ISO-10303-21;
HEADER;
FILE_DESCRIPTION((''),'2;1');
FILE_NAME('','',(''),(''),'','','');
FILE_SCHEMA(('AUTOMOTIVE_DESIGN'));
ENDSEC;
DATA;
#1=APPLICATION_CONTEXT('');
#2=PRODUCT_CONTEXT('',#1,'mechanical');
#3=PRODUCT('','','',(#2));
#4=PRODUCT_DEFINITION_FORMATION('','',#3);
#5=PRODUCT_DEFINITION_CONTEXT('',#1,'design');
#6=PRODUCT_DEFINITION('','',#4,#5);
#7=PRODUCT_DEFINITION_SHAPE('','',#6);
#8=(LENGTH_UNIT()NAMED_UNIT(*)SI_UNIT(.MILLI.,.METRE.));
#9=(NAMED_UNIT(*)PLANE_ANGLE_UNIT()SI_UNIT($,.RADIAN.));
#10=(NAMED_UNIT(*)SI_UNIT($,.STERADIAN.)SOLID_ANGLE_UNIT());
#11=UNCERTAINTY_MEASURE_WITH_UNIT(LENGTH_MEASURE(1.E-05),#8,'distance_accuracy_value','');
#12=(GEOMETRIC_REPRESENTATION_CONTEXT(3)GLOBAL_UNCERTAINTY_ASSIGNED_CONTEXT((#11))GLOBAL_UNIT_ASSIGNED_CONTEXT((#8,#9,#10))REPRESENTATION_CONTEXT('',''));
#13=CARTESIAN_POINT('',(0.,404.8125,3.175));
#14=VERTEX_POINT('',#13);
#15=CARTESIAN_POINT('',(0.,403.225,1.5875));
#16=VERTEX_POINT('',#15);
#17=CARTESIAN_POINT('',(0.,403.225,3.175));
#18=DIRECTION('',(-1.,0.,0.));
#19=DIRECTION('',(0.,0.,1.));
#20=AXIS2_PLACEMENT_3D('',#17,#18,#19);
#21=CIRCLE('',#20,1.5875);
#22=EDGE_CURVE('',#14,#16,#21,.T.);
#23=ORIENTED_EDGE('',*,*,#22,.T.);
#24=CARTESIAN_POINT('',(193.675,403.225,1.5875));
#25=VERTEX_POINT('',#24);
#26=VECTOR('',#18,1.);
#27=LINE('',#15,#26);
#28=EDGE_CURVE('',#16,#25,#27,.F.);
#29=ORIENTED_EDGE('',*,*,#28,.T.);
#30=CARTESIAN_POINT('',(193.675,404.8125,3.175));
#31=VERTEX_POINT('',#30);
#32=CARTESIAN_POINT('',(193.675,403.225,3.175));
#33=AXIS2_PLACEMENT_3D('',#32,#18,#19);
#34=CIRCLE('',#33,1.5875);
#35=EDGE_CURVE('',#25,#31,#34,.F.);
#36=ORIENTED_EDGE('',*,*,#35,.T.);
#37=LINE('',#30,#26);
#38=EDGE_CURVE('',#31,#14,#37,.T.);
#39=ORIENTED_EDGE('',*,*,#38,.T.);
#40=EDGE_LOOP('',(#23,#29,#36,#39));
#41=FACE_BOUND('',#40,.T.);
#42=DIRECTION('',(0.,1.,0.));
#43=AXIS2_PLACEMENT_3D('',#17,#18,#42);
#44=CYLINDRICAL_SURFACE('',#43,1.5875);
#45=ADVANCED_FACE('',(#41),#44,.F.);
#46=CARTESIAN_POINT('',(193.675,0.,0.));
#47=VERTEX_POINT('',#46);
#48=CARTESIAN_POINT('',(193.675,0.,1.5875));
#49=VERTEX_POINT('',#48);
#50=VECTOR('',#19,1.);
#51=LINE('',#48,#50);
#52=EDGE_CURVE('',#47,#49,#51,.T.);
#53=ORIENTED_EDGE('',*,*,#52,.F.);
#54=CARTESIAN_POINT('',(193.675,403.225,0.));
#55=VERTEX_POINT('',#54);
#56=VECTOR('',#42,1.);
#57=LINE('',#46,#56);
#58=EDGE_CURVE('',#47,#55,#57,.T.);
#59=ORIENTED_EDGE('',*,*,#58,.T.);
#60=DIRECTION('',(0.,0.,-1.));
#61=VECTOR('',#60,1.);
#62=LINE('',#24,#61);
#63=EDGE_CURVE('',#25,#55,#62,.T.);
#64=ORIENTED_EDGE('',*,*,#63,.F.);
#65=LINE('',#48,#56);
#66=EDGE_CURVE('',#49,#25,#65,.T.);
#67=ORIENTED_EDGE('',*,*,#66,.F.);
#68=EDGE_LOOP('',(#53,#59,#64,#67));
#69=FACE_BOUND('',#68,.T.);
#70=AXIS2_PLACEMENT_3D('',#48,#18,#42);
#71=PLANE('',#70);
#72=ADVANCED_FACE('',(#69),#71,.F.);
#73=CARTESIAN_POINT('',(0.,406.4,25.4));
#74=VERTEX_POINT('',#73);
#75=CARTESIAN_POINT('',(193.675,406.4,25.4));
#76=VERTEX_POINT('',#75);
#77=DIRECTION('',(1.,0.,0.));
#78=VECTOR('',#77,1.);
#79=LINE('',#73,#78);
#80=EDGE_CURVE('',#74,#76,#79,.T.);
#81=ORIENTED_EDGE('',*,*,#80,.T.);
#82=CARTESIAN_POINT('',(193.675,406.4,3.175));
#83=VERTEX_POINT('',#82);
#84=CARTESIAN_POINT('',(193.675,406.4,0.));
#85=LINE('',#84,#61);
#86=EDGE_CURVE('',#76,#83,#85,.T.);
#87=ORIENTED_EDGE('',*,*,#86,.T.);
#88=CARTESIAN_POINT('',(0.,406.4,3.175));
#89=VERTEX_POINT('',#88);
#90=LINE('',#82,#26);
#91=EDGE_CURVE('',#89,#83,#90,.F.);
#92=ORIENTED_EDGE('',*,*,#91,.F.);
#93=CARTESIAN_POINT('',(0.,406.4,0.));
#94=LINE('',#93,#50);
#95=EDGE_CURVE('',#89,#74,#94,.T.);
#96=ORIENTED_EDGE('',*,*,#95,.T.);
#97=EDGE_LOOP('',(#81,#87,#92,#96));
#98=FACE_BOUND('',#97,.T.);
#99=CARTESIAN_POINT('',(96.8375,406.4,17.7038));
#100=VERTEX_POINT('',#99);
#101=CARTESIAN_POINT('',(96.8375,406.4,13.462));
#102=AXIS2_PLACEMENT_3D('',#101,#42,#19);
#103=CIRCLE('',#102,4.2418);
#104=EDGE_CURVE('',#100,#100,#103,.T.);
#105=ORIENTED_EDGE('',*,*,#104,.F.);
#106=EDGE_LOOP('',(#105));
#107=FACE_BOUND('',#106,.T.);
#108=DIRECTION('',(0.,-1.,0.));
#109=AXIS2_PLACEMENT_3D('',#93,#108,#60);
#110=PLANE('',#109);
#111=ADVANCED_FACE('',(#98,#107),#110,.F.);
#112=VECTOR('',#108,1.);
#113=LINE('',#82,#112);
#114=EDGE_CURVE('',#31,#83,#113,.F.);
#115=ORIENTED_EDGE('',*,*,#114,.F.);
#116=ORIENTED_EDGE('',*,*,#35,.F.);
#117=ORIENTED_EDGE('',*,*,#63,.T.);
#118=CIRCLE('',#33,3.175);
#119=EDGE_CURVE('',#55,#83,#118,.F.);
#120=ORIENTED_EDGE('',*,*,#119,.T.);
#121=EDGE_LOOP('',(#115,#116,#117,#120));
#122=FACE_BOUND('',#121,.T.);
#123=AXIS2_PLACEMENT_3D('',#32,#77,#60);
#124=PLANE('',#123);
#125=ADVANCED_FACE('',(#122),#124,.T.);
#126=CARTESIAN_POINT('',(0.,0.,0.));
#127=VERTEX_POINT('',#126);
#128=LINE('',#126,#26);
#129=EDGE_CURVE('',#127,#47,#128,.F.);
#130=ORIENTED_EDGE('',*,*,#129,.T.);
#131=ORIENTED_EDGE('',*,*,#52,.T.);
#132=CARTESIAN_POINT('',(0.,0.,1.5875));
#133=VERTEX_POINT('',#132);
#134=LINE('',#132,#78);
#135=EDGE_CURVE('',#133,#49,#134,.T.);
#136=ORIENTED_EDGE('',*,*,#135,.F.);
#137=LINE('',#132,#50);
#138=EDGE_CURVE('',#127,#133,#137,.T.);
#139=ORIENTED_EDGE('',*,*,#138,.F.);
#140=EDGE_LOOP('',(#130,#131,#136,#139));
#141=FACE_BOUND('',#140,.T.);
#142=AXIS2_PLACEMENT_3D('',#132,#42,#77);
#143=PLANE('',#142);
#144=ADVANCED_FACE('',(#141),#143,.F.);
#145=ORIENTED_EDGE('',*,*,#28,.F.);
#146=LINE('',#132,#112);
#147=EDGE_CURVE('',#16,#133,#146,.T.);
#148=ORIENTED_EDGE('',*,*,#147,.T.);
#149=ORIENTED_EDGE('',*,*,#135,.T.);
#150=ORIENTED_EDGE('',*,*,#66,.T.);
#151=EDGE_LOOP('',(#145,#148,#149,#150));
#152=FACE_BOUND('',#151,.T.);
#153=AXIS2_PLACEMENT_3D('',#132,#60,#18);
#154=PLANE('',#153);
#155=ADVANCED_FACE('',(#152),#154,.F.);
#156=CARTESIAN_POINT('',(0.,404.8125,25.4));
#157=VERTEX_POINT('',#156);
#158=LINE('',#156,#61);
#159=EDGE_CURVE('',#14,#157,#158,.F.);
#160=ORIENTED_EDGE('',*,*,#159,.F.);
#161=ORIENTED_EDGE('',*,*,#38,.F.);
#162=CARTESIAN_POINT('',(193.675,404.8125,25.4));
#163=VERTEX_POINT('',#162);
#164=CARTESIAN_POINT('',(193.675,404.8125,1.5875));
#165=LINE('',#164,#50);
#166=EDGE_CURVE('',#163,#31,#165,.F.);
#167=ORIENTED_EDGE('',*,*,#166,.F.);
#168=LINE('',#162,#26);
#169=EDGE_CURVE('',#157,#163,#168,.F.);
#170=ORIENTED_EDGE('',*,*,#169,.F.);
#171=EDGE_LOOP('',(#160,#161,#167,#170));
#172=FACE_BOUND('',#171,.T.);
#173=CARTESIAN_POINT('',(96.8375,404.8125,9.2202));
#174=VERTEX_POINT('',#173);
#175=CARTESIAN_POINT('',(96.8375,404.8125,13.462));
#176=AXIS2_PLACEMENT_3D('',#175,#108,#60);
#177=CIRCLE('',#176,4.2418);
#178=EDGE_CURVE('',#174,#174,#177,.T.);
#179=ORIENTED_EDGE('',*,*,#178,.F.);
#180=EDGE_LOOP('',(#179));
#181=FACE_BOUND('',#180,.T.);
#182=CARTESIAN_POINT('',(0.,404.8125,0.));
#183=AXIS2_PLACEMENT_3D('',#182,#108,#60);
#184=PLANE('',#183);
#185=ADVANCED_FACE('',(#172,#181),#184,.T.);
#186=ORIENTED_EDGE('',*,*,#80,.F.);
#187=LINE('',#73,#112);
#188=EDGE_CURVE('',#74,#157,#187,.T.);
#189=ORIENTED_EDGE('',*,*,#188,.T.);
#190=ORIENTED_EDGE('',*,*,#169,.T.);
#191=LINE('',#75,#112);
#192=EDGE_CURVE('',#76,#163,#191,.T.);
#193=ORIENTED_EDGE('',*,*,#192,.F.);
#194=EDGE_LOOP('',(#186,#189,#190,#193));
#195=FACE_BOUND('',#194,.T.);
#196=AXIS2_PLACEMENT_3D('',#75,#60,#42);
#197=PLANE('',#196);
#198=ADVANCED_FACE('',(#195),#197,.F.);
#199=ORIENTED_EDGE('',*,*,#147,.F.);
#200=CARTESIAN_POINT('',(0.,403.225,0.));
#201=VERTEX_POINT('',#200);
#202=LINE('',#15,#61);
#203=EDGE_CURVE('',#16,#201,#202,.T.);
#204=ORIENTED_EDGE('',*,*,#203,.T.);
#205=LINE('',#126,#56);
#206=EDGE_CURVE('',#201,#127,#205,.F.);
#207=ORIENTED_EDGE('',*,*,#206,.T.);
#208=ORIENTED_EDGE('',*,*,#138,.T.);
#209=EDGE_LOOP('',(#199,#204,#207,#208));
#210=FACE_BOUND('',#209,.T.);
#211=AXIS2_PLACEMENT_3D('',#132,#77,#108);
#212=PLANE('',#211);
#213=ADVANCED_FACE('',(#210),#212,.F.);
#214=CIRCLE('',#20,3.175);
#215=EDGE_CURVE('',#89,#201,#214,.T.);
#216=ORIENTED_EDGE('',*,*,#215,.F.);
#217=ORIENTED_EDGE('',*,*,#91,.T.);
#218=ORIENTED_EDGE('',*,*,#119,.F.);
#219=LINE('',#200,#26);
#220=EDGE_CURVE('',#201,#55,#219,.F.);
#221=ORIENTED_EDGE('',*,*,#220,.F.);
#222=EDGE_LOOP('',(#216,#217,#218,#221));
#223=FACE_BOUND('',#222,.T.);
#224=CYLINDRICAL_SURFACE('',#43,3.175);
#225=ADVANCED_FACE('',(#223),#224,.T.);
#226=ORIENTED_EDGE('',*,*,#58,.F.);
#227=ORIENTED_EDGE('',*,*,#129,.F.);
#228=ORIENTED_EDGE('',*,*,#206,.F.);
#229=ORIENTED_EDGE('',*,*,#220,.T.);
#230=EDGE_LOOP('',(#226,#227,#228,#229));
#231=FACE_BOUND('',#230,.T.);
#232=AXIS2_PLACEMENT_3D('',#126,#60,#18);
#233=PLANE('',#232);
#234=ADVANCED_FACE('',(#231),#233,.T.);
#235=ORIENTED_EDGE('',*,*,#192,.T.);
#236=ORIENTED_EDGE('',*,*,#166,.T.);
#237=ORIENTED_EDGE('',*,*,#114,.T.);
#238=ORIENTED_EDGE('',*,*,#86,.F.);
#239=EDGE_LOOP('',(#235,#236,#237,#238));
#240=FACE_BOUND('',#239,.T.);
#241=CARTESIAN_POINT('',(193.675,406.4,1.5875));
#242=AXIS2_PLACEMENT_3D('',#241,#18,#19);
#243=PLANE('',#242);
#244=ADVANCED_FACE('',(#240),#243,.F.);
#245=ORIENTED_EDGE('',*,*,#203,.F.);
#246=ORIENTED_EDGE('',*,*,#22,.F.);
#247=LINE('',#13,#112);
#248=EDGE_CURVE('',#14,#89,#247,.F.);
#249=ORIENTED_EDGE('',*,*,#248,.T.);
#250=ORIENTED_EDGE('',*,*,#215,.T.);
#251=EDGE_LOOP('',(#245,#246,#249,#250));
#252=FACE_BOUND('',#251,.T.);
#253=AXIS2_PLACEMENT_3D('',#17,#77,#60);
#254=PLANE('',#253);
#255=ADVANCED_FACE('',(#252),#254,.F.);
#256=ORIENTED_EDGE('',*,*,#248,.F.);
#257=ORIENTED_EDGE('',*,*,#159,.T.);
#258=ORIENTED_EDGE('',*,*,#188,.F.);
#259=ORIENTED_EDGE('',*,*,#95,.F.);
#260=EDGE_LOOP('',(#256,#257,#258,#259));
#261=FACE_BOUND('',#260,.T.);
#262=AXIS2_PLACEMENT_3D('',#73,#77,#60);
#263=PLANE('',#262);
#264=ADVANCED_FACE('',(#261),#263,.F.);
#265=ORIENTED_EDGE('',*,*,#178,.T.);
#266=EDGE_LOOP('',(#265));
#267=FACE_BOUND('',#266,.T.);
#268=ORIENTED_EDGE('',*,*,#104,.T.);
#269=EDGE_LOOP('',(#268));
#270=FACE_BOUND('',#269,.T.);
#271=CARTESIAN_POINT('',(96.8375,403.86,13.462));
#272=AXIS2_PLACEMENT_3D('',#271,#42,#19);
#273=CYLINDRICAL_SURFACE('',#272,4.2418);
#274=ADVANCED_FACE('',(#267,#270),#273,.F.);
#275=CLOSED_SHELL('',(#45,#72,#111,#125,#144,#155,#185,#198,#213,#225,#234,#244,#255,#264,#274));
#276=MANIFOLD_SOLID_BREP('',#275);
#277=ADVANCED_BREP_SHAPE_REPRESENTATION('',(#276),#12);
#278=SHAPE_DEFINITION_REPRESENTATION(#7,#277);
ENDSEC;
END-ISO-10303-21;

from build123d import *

# Parameters (mm, degrees)
SKETCH1_W                    = 193.675
SKETCH1_H                    = 406.4
BOSS_EXTRUDE1_DEPTH          = 1.5875
EDGE_FLANGE1_STRIP_W         = 9.525
EDGE_FLANGE1_STRIP_H         = 1.5875
EDGE_FLANGE1_STRIP_CUT_DEPTH = 193.675
EDGE_FLANGE1_DEPTH           = 193.675
SKETCH5_R                    = 4.2418
CUT_EXTRUDE1_DEPTH           = 2.54


# Sheet-metal steps are written as plain solids
with BuildPart() as part:
    # Sketch1 → Boss-Extrude1 (new body)
    with BuildSketch(Plane.XY):
        with Locations((96.8375, 203.2)):
            Rectangle(SKETCH1_W, SKETCH1_H)
    extrude(amount=BOSS_EXTRUDE1_DEPTH)

    # Edge-Flange1 strip (across the edge) → Edge-Flange1 strip cut (cut)
    with BuildSketch(Plane(origin=(193.675, 406.4, 1.5875), x_dir=(0, -1, 0), z_dir=(-1, 0, 0))):
        with Locations((-1.5875, -0.79375)):
            Rectangle(EDGE_FLANGE1_STRIP_W, EDGE_FLANGE1_STRIP_H)
    extrude(amount=EDGE_FLANGE1_STRIP_CUT_DEPTH, mode=Mode.SUBTRACT)

    # Edge-Flange1 section (across the edge) → Edge-Flange1 (add)
    with BuildSketch(Plane(origin=(193.675, 406.4, 1.5875), x_dir=(0, -1, 0), z_dir=(-1, 0, 0))):
        with BuildLine():
            Line((0, 1.5875), (0, 23.8125))
            Line((0, 23.8125), (1.5875, 23.8125))
            Line((1.5875, 23.8125), (1.5875, 1.5875))
            ThreePointArc((1.5875, 1.5875), (2.052467985, 0.464967985), (3.175, 0))
            Line((3.175, 0), (3.175, -1.5875))
            ThreePointArc((3.175, -1.5875), (0.92993597, -0.65756403), (0, 1.5875))
        make_face()
    extrude(amount=EDGE_FLANGE1_DEPTH)

    # Sketch5 → Cut-Extrude1 (cut)
    with BuildSketch(Plane(origin=(0, 406.4, 0), x_dir=(1, 0, 0), z_dir=(0, 1, 0))):
        with Locations(Location((96.8375, -13.462, 0), (0, 0, 270))):
            Circle(SKETCH5_R)
    extrude(amount=-CUT_EXTRUDE1_DEPTH, mode=Mode.SUBTRACT)


solid = part.part
